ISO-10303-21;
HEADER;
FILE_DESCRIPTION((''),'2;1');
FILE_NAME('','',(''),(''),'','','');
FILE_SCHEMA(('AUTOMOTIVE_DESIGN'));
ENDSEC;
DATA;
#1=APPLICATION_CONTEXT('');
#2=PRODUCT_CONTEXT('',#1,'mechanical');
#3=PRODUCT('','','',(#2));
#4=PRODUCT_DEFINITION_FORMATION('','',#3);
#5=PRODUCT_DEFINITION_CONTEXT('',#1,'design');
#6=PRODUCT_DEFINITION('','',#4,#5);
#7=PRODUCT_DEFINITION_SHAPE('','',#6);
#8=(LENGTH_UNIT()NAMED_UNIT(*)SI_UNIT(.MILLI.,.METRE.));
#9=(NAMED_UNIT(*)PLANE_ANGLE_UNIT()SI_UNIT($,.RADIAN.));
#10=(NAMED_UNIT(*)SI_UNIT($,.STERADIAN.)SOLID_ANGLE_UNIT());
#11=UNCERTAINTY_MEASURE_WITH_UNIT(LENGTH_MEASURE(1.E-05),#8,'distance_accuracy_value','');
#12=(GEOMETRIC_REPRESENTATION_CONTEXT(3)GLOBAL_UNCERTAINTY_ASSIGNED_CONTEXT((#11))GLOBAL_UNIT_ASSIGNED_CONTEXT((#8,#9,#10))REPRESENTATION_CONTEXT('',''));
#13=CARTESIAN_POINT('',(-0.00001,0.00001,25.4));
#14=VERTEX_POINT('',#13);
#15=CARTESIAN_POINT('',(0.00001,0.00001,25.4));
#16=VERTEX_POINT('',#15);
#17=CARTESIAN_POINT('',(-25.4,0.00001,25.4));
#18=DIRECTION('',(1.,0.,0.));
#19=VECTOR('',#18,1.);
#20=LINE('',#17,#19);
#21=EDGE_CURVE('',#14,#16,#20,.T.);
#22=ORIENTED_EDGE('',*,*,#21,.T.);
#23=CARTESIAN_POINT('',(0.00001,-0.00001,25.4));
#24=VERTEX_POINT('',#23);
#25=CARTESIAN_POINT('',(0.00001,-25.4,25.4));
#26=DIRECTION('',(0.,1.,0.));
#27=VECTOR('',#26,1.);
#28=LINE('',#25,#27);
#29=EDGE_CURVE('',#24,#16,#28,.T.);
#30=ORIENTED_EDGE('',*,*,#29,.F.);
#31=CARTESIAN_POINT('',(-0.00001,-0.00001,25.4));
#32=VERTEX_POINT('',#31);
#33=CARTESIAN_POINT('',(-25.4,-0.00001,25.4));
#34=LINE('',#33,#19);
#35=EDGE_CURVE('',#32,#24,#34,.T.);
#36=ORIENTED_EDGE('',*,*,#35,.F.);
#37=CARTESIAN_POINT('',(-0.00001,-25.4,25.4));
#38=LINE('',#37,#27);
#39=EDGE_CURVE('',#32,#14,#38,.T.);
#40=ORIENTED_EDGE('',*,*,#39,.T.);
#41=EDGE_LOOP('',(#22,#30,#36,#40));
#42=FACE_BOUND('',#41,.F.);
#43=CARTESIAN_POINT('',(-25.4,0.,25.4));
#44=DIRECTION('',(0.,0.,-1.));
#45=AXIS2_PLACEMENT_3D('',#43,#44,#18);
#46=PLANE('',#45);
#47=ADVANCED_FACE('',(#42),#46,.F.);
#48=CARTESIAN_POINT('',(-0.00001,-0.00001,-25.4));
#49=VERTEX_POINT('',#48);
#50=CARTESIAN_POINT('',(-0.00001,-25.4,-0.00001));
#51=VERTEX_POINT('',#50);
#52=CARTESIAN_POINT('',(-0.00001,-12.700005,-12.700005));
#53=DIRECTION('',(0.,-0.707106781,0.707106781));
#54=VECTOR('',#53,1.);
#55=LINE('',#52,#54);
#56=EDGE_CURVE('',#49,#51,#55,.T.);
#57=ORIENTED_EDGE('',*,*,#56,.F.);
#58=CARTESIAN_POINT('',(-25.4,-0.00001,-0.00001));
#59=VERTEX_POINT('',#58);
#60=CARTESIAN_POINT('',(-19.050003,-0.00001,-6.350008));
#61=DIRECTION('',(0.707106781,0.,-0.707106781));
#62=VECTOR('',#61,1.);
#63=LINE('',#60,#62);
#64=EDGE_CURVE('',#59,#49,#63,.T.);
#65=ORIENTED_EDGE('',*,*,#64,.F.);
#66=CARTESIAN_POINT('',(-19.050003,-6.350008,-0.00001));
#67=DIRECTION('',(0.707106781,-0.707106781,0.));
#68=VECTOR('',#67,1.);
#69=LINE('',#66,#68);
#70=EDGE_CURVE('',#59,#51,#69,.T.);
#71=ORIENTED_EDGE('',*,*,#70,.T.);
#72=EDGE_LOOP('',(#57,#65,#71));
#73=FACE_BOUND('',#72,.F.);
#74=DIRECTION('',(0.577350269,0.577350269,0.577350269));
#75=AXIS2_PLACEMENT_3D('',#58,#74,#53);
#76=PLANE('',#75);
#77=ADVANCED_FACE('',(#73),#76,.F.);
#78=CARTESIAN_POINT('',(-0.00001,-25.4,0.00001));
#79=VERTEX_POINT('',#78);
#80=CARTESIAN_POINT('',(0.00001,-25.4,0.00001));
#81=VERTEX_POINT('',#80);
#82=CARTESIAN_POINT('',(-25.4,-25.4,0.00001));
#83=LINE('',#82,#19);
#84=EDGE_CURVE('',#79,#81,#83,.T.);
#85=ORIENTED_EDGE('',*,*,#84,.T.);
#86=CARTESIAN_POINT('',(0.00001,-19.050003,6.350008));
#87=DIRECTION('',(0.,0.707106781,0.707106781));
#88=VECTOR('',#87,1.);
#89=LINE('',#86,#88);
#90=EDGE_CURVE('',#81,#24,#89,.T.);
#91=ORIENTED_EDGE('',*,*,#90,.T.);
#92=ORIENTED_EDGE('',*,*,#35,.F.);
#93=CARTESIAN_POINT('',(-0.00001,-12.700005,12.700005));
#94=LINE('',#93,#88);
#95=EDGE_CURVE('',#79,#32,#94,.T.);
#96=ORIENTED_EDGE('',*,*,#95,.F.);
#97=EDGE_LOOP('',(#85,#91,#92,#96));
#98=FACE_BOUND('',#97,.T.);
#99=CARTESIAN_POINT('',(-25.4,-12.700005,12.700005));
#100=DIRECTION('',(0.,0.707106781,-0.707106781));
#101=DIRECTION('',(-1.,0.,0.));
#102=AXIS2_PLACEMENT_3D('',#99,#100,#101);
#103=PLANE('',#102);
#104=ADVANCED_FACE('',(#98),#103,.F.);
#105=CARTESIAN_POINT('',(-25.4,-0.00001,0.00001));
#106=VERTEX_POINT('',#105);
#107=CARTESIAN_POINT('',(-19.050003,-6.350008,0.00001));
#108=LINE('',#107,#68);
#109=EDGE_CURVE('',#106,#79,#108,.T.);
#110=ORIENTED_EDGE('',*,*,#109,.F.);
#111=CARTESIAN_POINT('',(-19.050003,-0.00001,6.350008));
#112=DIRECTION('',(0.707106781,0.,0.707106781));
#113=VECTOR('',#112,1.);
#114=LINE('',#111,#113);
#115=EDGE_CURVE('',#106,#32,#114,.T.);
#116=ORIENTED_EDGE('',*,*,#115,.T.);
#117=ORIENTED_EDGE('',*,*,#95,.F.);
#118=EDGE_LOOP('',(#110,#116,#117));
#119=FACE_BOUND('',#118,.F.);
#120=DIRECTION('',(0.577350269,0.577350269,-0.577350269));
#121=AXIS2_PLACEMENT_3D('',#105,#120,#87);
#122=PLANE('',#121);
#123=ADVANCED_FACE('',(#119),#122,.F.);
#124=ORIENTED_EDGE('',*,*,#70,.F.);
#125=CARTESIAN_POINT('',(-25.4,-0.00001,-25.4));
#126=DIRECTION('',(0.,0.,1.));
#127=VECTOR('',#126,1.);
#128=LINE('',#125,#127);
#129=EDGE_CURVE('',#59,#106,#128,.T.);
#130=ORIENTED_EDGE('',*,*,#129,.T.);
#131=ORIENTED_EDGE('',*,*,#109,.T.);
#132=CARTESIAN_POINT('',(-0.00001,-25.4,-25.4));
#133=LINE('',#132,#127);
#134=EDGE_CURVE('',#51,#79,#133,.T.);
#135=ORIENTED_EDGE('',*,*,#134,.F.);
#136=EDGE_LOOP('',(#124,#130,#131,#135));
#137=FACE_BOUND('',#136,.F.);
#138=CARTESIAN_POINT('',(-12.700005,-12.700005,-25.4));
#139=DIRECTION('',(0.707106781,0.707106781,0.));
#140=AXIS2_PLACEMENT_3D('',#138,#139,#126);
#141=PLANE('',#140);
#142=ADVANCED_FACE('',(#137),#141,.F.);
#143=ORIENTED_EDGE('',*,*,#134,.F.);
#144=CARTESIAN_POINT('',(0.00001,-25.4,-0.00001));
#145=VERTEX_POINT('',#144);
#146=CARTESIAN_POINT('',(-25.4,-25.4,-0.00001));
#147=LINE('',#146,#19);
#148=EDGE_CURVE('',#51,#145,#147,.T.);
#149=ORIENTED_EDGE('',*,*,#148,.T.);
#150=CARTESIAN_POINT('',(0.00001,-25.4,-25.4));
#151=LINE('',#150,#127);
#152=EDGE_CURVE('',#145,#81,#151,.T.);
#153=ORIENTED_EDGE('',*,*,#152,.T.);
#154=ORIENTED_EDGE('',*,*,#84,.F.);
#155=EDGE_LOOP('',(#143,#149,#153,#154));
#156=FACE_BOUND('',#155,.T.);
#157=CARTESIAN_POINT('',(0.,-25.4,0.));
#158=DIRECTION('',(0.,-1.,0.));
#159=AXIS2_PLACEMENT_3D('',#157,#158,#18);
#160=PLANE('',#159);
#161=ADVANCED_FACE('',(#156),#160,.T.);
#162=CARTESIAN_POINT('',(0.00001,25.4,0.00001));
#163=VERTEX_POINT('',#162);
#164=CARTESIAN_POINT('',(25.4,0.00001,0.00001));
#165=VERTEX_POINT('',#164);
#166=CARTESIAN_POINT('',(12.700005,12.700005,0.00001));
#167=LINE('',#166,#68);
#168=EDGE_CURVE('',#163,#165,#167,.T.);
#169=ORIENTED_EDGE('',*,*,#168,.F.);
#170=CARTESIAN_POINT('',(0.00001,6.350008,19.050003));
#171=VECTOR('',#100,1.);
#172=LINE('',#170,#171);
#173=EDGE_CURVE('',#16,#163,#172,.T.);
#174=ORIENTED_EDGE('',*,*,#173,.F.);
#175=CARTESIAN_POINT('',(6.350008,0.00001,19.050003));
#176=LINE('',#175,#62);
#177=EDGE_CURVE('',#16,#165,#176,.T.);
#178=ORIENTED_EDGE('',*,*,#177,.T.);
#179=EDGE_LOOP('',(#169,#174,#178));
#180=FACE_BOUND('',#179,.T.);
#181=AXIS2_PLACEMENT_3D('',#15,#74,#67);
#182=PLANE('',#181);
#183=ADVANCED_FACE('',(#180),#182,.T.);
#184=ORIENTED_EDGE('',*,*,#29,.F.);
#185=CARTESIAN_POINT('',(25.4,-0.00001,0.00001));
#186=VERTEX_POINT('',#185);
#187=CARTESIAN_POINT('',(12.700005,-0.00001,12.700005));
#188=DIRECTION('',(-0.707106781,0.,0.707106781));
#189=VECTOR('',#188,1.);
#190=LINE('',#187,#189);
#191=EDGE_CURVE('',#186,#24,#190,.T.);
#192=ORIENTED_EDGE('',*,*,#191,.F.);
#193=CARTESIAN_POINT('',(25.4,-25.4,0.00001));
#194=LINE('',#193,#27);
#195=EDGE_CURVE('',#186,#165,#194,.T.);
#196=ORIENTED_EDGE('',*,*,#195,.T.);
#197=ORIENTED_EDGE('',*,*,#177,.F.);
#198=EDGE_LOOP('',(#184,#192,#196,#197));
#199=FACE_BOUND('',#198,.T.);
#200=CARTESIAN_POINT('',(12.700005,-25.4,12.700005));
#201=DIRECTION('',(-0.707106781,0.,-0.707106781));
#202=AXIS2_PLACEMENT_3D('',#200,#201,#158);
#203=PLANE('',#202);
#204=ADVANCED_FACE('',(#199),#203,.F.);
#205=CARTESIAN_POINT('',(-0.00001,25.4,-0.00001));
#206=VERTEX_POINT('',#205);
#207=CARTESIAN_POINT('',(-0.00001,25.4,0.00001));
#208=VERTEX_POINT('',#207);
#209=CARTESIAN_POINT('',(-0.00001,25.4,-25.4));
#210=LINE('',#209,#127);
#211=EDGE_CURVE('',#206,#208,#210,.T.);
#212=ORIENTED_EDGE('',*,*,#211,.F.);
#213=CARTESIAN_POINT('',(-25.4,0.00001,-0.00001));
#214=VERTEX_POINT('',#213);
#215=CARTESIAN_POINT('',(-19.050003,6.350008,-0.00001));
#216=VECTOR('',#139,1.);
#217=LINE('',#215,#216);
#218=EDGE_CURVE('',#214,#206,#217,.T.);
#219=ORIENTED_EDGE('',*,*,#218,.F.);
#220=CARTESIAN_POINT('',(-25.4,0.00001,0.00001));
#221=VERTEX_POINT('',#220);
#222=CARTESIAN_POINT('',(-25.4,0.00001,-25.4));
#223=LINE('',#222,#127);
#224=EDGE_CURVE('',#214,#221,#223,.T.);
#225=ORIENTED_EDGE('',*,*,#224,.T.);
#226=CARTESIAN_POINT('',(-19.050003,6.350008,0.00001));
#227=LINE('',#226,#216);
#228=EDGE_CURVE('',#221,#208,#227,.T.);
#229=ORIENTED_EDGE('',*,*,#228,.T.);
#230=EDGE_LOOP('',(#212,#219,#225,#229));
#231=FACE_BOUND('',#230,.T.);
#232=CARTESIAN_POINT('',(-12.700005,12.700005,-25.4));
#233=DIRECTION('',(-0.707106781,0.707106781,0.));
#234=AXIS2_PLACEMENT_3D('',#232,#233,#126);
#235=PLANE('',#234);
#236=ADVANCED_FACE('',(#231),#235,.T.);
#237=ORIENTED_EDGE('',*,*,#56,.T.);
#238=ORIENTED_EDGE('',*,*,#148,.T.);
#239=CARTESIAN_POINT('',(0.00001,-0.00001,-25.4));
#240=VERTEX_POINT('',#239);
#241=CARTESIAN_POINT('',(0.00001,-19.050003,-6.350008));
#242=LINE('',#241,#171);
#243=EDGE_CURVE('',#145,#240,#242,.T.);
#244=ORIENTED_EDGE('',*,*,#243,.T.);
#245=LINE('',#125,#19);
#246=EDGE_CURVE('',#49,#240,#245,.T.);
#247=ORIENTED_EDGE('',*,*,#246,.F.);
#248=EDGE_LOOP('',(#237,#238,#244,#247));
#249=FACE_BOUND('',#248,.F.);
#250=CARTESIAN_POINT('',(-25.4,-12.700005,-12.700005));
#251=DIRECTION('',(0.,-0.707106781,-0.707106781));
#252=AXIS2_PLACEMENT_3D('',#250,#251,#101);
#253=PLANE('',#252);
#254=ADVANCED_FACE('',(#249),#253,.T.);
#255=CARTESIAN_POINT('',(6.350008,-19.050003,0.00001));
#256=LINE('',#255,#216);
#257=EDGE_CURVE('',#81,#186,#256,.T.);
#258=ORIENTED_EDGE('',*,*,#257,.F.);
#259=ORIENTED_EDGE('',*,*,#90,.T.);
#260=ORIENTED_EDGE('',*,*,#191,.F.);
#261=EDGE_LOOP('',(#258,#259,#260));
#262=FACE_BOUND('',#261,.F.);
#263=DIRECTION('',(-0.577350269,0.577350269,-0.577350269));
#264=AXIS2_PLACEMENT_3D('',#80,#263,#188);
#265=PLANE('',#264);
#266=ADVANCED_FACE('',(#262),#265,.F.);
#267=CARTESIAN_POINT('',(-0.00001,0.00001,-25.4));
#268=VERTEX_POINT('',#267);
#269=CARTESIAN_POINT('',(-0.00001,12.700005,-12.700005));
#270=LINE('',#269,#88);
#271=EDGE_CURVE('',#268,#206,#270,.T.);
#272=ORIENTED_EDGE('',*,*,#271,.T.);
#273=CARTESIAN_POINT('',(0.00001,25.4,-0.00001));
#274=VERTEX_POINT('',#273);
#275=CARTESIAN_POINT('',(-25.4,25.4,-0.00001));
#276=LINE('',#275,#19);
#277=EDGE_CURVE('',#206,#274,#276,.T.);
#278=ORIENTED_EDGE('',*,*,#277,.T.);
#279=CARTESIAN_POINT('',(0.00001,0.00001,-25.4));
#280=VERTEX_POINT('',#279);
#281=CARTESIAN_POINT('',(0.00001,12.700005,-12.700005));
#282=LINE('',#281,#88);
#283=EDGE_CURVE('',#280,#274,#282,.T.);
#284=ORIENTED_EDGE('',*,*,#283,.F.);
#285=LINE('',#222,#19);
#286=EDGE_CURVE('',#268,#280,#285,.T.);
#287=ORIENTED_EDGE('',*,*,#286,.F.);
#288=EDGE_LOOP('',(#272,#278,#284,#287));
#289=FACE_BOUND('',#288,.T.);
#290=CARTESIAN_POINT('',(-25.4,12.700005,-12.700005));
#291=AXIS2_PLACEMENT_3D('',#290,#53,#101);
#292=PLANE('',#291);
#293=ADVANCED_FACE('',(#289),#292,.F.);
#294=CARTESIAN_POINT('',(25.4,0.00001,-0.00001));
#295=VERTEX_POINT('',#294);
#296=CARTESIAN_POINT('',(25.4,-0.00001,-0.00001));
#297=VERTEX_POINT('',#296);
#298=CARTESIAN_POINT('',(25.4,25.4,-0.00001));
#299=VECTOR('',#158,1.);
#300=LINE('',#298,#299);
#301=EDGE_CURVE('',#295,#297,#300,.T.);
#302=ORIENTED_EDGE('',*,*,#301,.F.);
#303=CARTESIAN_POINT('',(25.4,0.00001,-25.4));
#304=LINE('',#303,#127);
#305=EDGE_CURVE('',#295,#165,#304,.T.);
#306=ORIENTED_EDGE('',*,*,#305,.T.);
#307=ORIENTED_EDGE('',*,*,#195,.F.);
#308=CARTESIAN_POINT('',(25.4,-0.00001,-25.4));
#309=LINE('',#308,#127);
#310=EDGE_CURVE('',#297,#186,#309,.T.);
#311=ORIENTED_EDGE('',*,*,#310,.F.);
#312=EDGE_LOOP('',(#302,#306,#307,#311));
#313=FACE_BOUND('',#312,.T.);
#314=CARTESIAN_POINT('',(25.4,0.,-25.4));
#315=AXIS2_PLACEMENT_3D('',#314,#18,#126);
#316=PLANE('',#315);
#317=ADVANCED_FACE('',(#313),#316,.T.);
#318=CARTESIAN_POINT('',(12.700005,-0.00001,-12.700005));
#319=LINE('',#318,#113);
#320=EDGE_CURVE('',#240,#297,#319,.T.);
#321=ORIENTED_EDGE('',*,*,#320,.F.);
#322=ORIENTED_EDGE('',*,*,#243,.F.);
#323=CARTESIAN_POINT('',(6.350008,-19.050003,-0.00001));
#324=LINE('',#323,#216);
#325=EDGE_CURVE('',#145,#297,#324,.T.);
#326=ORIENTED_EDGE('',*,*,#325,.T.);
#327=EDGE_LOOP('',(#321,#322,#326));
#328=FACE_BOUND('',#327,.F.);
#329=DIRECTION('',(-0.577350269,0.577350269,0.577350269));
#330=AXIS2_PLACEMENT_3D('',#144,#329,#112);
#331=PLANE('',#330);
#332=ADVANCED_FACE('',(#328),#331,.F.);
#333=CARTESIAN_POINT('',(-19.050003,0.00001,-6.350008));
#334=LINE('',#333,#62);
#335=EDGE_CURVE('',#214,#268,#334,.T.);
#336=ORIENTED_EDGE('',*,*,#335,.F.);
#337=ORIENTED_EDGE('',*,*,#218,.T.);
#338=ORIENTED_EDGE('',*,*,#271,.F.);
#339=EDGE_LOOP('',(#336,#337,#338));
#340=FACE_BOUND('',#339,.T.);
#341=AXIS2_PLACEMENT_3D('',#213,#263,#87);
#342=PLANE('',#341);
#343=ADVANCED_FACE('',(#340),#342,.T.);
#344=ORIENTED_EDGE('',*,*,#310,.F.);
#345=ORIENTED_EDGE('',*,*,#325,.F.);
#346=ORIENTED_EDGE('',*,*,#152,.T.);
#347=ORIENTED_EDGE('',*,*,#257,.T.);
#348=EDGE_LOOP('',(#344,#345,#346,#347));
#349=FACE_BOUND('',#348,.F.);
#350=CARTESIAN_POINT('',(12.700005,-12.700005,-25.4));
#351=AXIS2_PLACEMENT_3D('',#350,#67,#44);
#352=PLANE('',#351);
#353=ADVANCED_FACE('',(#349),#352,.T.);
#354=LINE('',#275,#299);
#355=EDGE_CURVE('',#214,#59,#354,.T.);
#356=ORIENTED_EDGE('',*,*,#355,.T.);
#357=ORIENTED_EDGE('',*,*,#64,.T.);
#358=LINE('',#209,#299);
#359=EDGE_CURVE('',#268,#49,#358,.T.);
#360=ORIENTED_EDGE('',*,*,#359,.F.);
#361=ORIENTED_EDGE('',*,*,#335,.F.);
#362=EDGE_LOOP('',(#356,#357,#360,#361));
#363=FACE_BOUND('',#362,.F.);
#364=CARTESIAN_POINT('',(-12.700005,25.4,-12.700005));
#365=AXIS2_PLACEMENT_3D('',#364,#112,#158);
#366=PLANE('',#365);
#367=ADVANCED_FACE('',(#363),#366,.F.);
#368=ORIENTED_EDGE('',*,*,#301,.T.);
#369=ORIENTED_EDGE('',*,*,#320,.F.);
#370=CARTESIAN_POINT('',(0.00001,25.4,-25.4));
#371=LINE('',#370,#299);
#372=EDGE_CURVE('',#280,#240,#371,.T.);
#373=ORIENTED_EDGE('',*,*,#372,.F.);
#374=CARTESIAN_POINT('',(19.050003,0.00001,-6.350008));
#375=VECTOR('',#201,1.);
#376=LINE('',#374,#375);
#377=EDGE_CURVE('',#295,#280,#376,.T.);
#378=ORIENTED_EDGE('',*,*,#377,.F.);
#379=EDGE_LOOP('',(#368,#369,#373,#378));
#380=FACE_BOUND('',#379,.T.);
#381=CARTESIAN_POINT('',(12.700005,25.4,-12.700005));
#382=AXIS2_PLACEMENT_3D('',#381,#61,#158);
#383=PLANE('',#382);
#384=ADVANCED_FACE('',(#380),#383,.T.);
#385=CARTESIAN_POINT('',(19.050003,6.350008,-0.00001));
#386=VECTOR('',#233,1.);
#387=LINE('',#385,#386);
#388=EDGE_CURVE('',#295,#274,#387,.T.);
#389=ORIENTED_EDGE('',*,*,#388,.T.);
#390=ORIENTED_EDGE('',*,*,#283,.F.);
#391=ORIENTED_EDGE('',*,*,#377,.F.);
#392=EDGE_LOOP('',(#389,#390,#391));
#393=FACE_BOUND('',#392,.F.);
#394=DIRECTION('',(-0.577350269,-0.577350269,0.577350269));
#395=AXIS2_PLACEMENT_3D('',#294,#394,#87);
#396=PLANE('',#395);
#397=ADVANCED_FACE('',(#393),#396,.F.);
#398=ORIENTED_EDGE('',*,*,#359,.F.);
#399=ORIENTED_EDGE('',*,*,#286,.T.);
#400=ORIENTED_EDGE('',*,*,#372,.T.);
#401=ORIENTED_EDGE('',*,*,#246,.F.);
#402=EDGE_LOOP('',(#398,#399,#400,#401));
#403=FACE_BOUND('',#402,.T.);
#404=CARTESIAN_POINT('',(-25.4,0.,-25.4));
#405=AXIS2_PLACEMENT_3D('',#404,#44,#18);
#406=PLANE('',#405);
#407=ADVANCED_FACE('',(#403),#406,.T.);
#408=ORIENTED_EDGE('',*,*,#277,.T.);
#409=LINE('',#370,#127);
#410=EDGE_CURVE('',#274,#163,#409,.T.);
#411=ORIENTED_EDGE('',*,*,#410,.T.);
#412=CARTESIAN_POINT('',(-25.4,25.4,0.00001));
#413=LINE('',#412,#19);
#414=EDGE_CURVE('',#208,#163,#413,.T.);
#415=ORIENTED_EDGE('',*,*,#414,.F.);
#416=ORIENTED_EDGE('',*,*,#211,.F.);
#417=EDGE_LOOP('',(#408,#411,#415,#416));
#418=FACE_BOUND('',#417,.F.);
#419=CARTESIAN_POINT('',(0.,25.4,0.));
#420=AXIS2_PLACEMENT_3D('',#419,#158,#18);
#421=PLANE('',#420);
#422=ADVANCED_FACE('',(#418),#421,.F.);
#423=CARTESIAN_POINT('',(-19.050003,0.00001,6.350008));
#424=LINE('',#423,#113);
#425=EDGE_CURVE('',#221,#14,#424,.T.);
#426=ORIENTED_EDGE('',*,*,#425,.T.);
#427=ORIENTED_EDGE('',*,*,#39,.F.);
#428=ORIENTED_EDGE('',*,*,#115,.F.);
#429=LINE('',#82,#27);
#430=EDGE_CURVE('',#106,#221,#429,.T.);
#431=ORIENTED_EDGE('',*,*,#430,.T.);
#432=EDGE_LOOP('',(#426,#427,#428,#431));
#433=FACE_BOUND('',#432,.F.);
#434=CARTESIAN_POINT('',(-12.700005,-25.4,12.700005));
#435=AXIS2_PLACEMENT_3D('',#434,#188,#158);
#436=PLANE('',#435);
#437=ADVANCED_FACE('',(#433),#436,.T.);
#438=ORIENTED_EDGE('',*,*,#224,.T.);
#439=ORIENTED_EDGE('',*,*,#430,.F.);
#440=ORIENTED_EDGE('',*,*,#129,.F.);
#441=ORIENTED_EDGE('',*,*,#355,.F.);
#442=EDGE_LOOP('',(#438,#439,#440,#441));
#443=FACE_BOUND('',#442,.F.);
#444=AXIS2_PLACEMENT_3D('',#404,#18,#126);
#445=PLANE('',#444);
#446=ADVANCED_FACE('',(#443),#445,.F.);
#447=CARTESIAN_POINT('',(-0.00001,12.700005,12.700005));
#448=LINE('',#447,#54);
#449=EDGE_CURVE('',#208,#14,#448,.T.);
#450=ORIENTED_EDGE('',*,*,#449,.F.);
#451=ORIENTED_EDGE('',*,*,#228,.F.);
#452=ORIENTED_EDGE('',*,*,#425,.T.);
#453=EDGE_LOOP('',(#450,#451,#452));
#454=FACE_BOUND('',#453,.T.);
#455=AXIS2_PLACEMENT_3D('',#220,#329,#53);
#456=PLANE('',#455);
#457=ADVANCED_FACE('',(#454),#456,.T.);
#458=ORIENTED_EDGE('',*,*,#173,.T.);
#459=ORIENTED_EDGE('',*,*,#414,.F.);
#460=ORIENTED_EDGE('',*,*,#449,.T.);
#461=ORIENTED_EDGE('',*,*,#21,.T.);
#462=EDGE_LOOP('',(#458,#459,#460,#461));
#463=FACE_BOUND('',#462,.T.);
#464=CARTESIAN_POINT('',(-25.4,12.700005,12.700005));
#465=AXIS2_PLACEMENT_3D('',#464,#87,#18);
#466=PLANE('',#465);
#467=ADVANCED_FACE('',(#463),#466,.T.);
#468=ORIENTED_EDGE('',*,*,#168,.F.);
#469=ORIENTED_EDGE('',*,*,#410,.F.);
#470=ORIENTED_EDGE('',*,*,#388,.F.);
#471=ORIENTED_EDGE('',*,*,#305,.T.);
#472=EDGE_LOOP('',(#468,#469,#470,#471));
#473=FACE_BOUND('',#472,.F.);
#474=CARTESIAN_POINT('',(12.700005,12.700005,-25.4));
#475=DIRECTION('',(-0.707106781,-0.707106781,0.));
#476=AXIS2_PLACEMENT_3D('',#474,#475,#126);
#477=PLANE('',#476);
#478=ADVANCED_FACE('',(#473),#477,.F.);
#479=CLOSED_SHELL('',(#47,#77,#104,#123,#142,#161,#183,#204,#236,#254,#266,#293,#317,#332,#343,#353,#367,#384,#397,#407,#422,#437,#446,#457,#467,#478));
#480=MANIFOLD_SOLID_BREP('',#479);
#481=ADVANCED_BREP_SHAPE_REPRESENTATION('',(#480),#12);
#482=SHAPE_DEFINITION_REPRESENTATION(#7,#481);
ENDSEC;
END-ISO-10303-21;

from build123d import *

# Parameters (mm, degrees)
F0_W     = 50.8
F0_H     = 50.8
F1_DEPTH = 25.4
F2_SIZE  = 25.39999


# Not quite as in the source:
# - a fillet or chamfer is up to 0.001 mm smaller than in the source, because OpenCascade refuses the exact size


with BuildPart() as f1:
    # F0 (on Front) → F1 (new body, symmetric)
    with BuildSketch(Plane.XZ):
        Rectangle(F0_W, F0_H)
    extrude(amount=F1_DEPTH, both=True)

    # F2 (size 25.4 in the source; OpenCascade refuses exactly that, so slightly less here)
    f2_edges = [f1.edges().sort_by_distance(p)[0] for p in [
        (0, 25.4, -25.4),
        (25.4, 0, -25.4),
        (0, -25.4, -25.4),
        (-25.4, 0, -25.4),
        (25.4, 25.4, 0),
        (0, 25.4, 25.4),
        (-25.4, 25.4, 0),
        (25.4, 0, 25.4),
        (25.4, -25.4, 0),
        (0, -25.4, 25.4),
        (-25.4, -25.4, 0),
        (-25.4, 0, 25.4),
    ]]
    chamfer(f2_edges, length=F2_SIZE)


solid = f1.part
